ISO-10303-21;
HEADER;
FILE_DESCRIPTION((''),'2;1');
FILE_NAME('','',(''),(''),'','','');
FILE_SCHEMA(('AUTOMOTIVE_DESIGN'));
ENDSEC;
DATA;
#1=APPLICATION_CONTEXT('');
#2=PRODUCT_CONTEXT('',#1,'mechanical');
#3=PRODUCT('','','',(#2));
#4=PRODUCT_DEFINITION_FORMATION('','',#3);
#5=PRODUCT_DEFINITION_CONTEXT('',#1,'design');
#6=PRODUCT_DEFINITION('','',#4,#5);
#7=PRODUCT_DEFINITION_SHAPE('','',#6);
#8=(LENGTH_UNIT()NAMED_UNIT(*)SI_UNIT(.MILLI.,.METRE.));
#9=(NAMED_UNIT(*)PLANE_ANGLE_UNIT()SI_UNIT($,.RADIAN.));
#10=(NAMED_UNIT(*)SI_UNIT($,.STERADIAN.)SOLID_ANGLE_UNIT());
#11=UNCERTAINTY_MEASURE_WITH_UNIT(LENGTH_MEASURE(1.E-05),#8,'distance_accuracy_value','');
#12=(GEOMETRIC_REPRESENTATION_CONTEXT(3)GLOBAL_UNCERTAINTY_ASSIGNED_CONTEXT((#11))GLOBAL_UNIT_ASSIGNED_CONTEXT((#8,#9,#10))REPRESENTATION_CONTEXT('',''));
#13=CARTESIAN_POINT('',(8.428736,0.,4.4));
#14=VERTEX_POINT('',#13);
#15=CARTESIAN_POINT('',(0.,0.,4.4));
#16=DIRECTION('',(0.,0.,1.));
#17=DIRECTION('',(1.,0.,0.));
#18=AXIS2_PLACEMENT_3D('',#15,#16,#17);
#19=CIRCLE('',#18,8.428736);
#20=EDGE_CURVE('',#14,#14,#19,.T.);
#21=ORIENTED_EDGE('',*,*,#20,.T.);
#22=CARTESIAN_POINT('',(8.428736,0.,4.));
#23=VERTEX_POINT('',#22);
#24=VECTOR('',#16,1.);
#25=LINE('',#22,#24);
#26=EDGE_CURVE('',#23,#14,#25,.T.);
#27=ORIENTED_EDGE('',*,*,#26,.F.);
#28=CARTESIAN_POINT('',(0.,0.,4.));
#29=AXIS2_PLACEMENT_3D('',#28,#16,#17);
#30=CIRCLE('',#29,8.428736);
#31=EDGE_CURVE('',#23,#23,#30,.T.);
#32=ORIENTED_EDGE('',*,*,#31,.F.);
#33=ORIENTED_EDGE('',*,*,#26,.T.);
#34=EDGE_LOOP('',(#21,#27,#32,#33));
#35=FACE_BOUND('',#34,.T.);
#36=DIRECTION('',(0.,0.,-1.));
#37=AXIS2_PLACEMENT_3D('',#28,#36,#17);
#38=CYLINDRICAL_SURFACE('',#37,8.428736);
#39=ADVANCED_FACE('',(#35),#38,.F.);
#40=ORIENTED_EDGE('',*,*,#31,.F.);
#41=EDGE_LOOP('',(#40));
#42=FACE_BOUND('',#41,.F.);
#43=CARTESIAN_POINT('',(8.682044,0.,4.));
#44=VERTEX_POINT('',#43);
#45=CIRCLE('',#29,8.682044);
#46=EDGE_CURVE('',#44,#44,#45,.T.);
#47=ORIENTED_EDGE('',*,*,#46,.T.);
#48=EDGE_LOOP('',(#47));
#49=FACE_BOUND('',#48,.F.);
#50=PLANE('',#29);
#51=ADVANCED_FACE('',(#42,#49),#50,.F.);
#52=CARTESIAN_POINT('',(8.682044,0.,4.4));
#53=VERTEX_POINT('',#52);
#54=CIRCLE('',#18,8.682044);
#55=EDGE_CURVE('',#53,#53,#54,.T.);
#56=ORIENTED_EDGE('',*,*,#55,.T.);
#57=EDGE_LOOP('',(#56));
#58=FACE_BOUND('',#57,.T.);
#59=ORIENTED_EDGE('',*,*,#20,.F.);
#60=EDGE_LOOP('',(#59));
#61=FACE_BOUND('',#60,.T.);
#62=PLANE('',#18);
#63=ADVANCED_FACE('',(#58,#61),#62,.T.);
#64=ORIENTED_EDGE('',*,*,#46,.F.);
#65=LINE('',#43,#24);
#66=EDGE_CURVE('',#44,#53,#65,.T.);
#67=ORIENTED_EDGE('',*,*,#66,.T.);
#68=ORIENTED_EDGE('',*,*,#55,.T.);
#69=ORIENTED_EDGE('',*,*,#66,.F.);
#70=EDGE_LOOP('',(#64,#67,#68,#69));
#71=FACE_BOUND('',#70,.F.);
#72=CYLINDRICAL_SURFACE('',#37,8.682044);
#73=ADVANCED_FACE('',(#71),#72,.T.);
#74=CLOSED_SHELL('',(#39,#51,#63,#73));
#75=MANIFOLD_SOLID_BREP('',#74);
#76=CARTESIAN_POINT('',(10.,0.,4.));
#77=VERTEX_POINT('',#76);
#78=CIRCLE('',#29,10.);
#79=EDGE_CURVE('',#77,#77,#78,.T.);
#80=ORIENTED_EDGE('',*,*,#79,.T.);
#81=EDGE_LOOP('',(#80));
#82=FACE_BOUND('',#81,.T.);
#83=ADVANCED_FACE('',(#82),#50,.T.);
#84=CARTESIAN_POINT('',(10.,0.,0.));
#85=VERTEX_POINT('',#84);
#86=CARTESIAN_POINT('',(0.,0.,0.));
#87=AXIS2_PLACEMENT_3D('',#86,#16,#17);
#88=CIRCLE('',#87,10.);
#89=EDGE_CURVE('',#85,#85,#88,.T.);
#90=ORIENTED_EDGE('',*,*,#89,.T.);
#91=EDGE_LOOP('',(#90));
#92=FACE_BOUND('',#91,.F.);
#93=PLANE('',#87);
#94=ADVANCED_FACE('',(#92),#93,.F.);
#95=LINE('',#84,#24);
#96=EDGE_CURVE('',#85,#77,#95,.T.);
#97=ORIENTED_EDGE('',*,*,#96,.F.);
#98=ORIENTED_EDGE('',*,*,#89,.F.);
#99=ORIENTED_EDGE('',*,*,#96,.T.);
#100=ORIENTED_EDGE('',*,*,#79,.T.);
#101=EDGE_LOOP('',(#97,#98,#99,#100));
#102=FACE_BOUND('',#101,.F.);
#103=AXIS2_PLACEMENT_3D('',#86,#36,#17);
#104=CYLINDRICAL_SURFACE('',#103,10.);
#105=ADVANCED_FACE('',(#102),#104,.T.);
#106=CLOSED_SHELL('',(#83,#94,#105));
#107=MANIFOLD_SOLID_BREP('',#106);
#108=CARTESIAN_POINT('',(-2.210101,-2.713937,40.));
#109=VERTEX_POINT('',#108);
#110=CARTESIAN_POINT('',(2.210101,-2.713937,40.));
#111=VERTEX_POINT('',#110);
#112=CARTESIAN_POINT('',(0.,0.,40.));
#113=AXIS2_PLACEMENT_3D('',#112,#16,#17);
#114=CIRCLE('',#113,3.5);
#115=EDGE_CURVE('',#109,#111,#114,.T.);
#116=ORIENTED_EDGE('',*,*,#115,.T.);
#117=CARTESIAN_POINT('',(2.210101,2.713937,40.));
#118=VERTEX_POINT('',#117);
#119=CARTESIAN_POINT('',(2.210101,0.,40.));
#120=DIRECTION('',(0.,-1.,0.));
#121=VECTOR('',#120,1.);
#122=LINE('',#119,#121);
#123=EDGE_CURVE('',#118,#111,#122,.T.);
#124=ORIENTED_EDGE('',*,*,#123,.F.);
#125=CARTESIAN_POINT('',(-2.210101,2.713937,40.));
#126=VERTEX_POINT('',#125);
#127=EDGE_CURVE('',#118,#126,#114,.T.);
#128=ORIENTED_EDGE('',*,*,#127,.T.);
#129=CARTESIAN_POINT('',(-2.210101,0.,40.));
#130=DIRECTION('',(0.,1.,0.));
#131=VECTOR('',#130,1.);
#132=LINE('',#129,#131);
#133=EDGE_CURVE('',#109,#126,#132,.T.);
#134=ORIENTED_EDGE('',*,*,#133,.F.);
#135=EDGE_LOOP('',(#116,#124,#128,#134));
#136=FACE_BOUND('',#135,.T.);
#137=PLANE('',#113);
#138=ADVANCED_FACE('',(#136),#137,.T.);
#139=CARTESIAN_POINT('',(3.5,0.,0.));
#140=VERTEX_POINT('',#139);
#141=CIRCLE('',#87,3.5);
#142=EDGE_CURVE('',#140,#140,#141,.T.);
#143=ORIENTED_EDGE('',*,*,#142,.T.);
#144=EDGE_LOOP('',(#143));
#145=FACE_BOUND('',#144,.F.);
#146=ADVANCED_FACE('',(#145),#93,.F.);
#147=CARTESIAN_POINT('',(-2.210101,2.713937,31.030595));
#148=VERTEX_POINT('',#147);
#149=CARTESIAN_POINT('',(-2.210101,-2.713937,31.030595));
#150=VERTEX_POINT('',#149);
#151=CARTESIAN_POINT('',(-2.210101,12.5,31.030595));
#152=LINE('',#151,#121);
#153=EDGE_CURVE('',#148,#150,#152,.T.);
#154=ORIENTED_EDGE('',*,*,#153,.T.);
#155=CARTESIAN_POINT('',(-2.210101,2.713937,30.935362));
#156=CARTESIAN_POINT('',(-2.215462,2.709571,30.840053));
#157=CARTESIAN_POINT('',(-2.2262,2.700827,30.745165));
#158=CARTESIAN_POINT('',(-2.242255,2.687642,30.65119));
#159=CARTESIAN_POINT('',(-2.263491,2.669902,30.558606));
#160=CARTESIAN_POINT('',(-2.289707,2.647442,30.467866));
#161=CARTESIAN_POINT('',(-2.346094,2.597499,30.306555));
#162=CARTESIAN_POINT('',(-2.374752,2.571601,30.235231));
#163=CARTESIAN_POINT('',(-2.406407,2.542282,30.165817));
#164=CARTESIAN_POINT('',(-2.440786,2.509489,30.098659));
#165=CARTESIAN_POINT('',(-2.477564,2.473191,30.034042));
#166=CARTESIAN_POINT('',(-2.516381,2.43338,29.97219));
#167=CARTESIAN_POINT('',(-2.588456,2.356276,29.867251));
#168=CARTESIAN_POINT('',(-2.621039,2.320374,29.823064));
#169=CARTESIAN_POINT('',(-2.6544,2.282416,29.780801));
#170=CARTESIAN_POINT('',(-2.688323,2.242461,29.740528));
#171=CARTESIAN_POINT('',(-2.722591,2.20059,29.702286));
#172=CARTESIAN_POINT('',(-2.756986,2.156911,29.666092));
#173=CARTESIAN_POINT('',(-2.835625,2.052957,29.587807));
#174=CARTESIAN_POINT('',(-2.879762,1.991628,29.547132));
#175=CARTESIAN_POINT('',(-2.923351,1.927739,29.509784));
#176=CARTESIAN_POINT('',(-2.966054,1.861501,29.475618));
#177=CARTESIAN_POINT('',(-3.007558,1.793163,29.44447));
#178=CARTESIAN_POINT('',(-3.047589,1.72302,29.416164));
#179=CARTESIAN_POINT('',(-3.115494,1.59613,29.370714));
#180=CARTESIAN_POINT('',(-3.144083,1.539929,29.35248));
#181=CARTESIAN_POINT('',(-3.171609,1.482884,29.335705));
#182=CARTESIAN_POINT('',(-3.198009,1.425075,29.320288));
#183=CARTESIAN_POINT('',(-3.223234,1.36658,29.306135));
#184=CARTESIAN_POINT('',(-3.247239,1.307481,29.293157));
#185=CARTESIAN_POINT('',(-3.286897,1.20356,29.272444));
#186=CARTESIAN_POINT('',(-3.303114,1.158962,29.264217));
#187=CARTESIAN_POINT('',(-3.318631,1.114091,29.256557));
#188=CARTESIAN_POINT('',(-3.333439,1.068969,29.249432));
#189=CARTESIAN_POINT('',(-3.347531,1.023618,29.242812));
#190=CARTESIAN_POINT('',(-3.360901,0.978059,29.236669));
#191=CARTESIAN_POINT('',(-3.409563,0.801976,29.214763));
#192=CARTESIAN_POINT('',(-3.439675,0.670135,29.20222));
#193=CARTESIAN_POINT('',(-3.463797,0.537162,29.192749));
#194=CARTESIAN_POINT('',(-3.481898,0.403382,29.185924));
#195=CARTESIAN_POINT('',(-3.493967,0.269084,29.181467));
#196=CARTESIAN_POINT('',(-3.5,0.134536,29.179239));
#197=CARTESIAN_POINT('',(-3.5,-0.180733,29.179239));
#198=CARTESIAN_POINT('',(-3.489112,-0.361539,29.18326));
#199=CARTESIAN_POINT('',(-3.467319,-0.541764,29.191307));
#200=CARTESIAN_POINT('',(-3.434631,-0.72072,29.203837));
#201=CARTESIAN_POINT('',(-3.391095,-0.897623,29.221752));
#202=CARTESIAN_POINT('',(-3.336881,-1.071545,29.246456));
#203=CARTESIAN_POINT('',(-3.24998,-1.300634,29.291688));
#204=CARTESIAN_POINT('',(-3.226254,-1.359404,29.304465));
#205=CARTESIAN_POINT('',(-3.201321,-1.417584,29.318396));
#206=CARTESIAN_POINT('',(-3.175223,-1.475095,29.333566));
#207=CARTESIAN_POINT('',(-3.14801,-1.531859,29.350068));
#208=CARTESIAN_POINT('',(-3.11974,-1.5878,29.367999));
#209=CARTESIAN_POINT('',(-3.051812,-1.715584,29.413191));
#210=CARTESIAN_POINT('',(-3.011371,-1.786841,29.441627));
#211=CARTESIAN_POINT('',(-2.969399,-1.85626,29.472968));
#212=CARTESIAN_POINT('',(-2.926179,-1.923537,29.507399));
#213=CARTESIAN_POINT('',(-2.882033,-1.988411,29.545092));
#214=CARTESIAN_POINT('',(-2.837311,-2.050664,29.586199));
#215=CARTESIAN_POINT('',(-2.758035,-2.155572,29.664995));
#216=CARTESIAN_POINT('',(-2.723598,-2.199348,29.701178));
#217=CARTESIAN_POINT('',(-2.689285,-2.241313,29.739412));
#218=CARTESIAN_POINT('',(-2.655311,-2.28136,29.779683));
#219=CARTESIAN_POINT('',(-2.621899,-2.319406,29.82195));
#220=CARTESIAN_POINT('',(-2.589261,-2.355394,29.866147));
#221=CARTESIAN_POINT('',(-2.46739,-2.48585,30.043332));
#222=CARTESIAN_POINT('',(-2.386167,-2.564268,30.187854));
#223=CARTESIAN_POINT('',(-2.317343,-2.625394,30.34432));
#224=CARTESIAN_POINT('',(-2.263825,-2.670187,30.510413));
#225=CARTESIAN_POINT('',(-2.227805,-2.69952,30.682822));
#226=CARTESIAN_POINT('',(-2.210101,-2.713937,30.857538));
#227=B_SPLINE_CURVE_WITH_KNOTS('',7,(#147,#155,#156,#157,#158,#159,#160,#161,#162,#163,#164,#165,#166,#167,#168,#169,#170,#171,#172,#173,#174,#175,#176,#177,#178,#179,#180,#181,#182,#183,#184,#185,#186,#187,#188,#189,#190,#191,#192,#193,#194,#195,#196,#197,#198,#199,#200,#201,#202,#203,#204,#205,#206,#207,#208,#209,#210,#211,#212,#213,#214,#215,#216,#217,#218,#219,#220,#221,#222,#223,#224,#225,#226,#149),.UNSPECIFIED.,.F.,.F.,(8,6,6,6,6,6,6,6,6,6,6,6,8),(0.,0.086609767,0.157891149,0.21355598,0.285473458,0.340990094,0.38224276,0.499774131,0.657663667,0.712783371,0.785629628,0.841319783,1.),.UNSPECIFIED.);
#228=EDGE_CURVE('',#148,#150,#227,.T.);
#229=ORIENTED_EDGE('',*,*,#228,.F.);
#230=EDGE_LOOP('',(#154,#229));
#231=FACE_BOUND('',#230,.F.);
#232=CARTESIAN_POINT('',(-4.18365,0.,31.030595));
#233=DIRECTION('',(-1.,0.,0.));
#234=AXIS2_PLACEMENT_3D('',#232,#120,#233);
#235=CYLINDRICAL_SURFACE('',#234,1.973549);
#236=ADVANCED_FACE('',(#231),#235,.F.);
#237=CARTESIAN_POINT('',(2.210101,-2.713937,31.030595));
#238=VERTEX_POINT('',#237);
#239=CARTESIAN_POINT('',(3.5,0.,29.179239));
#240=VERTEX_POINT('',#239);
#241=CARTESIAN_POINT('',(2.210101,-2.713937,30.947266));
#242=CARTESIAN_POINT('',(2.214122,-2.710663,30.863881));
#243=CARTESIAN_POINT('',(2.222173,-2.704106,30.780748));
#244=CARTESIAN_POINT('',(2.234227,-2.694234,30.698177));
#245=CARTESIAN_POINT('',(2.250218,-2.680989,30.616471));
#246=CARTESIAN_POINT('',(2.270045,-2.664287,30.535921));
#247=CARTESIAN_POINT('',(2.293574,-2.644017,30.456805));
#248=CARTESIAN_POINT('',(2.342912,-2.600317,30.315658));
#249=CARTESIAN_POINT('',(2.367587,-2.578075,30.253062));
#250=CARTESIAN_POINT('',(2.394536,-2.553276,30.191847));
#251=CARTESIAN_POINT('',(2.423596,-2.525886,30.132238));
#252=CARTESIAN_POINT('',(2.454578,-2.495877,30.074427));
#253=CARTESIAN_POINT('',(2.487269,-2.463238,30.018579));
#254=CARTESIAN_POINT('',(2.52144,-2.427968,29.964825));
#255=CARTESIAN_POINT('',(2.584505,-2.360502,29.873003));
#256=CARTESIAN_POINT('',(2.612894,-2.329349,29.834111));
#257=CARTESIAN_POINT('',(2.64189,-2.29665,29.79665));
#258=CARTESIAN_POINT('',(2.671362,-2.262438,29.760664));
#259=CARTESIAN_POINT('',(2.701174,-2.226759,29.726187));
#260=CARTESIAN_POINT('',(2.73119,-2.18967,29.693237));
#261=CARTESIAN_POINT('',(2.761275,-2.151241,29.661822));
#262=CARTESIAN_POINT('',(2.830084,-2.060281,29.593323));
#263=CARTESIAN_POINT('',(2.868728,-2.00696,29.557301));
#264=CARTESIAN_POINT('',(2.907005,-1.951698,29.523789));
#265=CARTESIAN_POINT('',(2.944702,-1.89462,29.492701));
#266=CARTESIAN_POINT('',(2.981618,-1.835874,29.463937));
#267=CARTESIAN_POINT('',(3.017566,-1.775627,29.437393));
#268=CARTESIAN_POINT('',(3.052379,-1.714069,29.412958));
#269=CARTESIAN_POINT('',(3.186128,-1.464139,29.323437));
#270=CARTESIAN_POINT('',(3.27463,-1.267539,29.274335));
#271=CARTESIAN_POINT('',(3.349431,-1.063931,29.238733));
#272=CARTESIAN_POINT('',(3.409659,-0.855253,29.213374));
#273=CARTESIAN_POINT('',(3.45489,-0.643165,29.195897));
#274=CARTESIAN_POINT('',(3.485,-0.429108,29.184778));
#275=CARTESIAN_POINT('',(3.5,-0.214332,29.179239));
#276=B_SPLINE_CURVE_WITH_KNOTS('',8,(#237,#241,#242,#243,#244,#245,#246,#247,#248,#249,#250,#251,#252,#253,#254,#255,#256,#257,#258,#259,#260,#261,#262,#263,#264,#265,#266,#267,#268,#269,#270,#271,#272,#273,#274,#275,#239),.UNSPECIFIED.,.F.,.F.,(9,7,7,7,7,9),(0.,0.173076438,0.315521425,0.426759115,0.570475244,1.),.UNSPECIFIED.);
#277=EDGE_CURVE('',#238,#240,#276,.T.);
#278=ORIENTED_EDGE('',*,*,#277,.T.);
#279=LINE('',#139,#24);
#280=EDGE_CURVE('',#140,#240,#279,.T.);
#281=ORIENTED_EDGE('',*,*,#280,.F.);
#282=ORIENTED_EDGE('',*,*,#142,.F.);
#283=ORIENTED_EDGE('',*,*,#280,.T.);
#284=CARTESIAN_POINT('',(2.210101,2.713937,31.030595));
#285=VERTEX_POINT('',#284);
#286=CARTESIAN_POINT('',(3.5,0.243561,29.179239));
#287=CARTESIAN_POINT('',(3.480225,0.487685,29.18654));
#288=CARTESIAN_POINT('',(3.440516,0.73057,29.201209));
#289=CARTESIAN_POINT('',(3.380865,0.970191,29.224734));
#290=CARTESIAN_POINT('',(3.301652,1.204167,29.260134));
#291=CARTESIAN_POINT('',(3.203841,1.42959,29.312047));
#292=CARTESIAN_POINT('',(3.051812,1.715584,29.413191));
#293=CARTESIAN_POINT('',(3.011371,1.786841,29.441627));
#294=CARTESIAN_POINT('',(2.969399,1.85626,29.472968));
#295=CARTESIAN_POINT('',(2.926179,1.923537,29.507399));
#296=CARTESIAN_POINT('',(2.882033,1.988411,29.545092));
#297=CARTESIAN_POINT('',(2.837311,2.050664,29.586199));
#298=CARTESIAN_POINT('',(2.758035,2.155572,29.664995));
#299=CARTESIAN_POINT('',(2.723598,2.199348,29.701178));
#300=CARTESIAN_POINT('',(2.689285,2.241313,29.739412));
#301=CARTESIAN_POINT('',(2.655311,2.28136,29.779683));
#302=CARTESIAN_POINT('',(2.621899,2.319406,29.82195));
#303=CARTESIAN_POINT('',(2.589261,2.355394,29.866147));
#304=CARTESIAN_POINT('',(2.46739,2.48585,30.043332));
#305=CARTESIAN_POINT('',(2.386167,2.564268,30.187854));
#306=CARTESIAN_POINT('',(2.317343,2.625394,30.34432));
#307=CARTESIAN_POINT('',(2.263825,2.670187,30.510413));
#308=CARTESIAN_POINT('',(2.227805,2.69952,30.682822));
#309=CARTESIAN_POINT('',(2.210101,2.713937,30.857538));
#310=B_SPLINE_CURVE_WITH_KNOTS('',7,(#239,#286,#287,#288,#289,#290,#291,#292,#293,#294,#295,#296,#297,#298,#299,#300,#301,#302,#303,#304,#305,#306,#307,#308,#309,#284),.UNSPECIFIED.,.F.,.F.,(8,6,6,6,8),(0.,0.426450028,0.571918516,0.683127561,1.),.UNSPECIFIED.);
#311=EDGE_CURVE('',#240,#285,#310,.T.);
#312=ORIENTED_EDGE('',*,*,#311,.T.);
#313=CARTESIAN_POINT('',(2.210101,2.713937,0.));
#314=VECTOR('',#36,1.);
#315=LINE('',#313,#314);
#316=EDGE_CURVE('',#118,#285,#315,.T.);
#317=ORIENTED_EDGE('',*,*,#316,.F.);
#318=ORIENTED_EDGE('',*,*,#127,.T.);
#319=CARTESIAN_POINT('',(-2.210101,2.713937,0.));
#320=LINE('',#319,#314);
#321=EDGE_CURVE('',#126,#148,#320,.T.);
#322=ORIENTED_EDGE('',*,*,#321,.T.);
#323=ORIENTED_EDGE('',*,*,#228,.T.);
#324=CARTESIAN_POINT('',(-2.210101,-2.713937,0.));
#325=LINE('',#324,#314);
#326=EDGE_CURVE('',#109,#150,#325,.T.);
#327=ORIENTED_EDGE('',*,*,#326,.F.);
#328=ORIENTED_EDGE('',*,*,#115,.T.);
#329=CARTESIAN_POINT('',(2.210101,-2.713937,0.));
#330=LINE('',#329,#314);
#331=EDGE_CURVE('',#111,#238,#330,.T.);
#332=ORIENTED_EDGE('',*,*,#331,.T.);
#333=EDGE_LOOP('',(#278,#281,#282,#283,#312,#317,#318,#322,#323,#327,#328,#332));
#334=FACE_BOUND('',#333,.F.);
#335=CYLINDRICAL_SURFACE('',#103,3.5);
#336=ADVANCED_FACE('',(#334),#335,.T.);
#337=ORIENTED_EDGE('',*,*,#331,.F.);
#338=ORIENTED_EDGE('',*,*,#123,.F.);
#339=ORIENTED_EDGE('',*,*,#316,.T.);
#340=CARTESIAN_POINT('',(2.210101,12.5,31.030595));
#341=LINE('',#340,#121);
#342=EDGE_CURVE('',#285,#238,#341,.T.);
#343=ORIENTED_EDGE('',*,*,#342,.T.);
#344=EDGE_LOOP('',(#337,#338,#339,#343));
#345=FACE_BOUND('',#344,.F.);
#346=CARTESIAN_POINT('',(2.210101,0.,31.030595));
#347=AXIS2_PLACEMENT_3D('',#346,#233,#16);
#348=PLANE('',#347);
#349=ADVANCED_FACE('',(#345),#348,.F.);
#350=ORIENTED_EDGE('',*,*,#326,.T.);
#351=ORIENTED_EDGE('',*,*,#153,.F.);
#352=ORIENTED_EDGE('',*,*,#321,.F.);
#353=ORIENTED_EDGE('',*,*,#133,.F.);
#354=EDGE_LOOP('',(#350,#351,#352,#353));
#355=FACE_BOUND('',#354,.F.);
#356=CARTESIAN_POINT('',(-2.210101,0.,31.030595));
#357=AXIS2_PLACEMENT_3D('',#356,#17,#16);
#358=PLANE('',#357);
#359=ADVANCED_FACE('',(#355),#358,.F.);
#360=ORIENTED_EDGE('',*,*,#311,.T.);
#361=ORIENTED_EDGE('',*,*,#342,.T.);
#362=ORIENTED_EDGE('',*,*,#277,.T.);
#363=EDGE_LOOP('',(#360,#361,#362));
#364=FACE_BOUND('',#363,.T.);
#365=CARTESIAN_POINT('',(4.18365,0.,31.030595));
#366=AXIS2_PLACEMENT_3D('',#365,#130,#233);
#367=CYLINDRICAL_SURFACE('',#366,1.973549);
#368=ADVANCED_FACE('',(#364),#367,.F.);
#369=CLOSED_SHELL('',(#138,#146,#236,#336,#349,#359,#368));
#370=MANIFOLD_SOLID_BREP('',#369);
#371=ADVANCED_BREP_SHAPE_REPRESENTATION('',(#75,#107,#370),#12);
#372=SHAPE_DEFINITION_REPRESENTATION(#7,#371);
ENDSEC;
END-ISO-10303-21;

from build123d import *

# Parameters (mm, degrees)
F0_R     = 10
F0_R_2   = 3.5
F1_DEPTH = 4
F2_DEPTH = 40
F3_R     = 8.6820439201
F3_R_2   = 8.4287358905
F4_DEPTH = 0.4
F5_W     = 3.9470982738
F5_H     = 10.0623220205
F6_DEPTH = 12.5


# Not quite as in the source:
# - a feature names something its author has since deleted; it is built from what else it names


with BuildPart() as f1:
    # F0 (on Top) → F1 (new body)
    with BuildSketch(Plane.XY):
        Circle(F0_R)
        Circle(F0_R_2, mode=Mode.SUBTRACT)
        Circle(F0_R_2)
    extrude(amount=F1_DEPTH)


with BuildPart() as f2:
    # F0 (on Top) → F2 (new body)
    with BuildSketch(Plane.XY):
        Circle(F0_R_2)
    extrude(amount=F2_DEPTH)

    # F5 (on Front) → F6 (cut, symmetric)
    with BuildSketch(Plane.XZ):
        with Locations((4.183649784, 36.0617563128)):
            Rectangle(F5_W, F5_H)
        with BuildLine():
            Line((6.1571989208, 31.0305953026), (2.2101006471, 31.0305953026))
            ThreePointArc((2.2101006471, 31.0305953026), (4.183649784, 29.0570461657), (6.1571989208, 31.0305953026))
        make_face()
        with Locations((-4.183649784, 36.0617563128)):
            Rectangle(F5_W, F5_H)
        with BuildLine():
            ThreePointArc((-6.1571989208, 31.0305953026), (-4.183649784, 29.0570461657), (-2.2101006471, 31.0305953026))
            Line((-2.2101006471, 31.0305953026), (-6.1571989208, 31.0305953026))
        make_face()
    extrude(amount=F6_DEPTH, both=True, mode=Mode.SUBTRACT)


with BuildPart() as f4:
    # F3 (on face) → F4 (new body)
    with BuildSketch(Plane.XY.offset(4)):
        Circle(F3_R)
        Circle(F3_R_2, mode=Mode.SUBTRACT)
    extrude(amount=F4_DEPTH)


solid = Compound([f1.part, f2.part, f4.part])
